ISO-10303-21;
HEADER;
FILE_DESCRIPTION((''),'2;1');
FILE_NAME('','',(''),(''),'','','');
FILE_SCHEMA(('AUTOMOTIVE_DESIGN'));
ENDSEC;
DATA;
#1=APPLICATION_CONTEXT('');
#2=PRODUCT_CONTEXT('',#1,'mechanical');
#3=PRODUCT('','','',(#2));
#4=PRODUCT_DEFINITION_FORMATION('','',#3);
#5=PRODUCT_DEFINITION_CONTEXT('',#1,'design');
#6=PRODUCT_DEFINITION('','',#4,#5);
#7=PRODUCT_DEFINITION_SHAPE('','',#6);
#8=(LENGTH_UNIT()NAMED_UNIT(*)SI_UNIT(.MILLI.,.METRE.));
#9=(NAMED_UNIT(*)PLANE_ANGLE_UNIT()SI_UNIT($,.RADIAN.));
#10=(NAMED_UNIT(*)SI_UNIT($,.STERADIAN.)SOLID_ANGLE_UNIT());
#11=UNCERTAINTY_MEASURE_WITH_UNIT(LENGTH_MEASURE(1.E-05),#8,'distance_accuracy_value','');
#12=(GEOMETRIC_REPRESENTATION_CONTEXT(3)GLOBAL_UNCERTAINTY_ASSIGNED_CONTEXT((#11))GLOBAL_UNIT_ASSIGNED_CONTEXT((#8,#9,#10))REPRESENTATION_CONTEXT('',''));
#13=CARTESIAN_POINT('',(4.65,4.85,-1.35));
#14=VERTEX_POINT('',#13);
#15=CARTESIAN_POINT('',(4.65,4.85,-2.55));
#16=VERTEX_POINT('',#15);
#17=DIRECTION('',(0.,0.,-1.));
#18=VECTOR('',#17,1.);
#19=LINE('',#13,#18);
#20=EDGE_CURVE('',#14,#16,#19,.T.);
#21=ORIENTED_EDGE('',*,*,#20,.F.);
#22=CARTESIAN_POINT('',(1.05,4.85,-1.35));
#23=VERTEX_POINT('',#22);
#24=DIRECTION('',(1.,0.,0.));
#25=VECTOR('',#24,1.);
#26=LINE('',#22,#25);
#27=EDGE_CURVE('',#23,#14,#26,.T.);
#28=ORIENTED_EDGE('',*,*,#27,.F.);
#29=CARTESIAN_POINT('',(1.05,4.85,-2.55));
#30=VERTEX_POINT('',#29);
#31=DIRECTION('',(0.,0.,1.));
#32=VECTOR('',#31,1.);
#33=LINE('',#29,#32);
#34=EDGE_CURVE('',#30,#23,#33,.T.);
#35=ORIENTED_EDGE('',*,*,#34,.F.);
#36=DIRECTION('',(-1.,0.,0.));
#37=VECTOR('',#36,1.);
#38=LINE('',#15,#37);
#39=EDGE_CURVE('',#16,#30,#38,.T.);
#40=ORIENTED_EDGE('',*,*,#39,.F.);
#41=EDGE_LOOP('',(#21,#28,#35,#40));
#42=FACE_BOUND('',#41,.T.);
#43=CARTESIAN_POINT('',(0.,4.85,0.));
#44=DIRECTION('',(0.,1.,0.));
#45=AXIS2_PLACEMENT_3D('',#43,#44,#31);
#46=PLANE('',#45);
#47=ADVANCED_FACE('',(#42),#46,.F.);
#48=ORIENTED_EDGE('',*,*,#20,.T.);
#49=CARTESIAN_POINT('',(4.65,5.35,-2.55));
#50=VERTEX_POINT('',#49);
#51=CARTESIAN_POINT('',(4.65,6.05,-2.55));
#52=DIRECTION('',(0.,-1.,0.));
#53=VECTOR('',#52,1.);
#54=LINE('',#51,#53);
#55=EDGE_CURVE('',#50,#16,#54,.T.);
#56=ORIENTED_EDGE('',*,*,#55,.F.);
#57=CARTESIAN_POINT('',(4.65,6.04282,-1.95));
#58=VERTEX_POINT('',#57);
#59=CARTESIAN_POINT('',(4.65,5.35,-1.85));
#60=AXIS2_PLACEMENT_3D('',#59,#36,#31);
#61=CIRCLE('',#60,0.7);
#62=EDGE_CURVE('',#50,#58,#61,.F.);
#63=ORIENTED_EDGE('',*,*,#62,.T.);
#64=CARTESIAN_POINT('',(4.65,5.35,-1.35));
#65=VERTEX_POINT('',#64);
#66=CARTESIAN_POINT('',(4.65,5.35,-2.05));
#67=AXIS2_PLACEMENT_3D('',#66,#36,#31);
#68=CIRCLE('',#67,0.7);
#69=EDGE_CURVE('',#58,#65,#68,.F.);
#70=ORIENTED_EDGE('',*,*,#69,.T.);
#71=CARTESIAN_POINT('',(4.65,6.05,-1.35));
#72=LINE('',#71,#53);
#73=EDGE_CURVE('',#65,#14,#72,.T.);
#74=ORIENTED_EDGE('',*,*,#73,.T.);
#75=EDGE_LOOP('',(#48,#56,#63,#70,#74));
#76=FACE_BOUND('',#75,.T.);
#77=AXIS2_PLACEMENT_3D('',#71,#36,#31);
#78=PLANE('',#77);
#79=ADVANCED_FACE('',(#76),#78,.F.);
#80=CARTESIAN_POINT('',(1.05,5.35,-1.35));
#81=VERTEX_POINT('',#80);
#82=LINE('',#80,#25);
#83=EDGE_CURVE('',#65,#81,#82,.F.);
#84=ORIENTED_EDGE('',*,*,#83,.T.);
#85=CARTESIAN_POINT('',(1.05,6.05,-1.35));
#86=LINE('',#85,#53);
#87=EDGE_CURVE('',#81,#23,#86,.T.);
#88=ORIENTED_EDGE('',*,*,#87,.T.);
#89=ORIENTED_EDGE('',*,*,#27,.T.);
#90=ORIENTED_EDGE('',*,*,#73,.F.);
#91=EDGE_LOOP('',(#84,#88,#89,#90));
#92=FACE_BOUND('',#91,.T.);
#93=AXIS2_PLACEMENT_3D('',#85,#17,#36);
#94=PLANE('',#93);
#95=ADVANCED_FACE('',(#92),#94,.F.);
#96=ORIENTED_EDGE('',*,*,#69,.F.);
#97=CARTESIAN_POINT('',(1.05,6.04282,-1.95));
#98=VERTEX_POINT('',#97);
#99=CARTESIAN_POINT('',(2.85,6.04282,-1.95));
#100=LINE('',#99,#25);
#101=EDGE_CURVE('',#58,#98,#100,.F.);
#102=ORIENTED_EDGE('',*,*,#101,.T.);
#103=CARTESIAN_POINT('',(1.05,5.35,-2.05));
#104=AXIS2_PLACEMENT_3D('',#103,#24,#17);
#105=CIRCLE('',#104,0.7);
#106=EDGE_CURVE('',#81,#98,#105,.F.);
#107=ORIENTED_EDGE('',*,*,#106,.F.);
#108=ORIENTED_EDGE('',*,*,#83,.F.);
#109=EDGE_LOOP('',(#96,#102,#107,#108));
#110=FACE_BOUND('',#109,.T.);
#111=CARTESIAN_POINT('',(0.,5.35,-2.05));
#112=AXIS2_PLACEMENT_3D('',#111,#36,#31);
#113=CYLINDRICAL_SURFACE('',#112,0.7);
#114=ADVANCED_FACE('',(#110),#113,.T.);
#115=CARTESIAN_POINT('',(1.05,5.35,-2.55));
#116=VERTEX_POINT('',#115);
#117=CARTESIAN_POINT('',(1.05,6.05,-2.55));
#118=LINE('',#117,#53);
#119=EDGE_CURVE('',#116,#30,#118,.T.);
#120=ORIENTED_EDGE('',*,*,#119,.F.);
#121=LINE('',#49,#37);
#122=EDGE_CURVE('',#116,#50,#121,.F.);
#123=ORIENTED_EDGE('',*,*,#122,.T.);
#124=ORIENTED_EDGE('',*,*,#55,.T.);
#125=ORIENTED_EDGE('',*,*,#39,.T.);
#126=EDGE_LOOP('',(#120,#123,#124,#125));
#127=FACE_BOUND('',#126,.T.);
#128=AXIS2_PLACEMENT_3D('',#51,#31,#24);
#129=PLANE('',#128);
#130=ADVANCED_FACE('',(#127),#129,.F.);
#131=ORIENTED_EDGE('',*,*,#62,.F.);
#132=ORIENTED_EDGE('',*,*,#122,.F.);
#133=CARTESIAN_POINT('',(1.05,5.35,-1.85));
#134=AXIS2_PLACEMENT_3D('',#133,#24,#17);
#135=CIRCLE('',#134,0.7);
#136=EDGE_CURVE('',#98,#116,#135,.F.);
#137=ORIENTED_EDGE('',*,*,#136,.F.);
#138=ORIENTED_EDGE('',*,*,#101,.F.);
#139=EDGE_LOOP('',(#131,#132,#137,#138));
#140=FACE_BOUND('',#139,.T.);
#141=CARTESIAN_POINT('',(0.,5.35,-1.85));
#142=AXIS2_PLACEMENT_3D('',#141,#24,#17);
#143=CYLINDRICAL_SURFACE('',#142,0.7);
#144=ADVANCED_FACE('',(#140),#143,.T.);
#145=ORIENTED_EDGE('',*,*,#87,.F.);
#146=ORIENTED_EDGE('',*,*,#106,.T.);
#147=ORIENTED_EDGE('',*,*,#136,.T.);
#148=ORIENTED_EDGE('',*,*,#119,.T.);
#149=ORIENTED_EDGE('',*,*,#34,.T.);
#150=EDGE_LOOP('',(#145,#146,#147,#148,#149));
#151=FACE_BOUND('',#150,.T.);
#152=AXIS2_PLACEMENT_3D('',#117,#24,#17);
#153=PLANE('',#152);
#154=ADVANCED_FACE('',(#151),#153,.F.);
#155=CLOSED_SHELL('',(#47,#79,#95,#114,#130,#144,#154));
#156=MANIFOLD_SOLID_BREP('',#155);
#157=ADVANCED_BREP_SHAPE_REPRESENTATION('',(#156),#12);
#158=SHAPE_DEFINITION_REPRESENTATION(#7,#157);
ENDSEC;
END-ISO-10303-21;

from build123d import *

# Parameters (mm, degrees)
SKETCH_1_W      = 3.6
SKETCH_1_H      = 1.2
EXTRUDE_1_DEPTH = 1.2
FILLET_1_R      = 0.7


with BuildPart() as part:
    # Эскиз1 → Бобышка-Вытянуть1 (new body)
    with BuildSketch(Plane(origin=(0, 4.85, 0), x_dir=(1, 0, 0), z_dir=(0, 1, 0))):
        with Locations((2.85, 1.95)):
            Rectangle(SKETCH_1_W, SKETCH_1_H)
    extrude(amount=EXTRUDE_1_DEPTH)

    # Скругление1
    # the kernel refuses this fillet: 0.7 mm, written as the material it takes off along each edge
    with BuildSketch(Plane(origin=(-0.7, 6.05, -1.35), x_dir=(0, -1, 0), z_dir=(1, 0, 0)), Plane(origin=(6.4, 6.05, -2.55), x_dir=(0, -1, 0), z_dir=(-1, 0, 0))) as fillet_1_piece_1:
        with BuildLine():
            CenterArc((FILLET_1_R, FILLET_1_R), FILLET_1_R, 180, 90)
            Line((0, FILLET_1_R), (0, 0))
            Line((0, 0), (FILLET_1_R, 0))
        make_face()
    extrude(amount=7.1, mode=Mode.SUBTRACT)


solid = part.part
